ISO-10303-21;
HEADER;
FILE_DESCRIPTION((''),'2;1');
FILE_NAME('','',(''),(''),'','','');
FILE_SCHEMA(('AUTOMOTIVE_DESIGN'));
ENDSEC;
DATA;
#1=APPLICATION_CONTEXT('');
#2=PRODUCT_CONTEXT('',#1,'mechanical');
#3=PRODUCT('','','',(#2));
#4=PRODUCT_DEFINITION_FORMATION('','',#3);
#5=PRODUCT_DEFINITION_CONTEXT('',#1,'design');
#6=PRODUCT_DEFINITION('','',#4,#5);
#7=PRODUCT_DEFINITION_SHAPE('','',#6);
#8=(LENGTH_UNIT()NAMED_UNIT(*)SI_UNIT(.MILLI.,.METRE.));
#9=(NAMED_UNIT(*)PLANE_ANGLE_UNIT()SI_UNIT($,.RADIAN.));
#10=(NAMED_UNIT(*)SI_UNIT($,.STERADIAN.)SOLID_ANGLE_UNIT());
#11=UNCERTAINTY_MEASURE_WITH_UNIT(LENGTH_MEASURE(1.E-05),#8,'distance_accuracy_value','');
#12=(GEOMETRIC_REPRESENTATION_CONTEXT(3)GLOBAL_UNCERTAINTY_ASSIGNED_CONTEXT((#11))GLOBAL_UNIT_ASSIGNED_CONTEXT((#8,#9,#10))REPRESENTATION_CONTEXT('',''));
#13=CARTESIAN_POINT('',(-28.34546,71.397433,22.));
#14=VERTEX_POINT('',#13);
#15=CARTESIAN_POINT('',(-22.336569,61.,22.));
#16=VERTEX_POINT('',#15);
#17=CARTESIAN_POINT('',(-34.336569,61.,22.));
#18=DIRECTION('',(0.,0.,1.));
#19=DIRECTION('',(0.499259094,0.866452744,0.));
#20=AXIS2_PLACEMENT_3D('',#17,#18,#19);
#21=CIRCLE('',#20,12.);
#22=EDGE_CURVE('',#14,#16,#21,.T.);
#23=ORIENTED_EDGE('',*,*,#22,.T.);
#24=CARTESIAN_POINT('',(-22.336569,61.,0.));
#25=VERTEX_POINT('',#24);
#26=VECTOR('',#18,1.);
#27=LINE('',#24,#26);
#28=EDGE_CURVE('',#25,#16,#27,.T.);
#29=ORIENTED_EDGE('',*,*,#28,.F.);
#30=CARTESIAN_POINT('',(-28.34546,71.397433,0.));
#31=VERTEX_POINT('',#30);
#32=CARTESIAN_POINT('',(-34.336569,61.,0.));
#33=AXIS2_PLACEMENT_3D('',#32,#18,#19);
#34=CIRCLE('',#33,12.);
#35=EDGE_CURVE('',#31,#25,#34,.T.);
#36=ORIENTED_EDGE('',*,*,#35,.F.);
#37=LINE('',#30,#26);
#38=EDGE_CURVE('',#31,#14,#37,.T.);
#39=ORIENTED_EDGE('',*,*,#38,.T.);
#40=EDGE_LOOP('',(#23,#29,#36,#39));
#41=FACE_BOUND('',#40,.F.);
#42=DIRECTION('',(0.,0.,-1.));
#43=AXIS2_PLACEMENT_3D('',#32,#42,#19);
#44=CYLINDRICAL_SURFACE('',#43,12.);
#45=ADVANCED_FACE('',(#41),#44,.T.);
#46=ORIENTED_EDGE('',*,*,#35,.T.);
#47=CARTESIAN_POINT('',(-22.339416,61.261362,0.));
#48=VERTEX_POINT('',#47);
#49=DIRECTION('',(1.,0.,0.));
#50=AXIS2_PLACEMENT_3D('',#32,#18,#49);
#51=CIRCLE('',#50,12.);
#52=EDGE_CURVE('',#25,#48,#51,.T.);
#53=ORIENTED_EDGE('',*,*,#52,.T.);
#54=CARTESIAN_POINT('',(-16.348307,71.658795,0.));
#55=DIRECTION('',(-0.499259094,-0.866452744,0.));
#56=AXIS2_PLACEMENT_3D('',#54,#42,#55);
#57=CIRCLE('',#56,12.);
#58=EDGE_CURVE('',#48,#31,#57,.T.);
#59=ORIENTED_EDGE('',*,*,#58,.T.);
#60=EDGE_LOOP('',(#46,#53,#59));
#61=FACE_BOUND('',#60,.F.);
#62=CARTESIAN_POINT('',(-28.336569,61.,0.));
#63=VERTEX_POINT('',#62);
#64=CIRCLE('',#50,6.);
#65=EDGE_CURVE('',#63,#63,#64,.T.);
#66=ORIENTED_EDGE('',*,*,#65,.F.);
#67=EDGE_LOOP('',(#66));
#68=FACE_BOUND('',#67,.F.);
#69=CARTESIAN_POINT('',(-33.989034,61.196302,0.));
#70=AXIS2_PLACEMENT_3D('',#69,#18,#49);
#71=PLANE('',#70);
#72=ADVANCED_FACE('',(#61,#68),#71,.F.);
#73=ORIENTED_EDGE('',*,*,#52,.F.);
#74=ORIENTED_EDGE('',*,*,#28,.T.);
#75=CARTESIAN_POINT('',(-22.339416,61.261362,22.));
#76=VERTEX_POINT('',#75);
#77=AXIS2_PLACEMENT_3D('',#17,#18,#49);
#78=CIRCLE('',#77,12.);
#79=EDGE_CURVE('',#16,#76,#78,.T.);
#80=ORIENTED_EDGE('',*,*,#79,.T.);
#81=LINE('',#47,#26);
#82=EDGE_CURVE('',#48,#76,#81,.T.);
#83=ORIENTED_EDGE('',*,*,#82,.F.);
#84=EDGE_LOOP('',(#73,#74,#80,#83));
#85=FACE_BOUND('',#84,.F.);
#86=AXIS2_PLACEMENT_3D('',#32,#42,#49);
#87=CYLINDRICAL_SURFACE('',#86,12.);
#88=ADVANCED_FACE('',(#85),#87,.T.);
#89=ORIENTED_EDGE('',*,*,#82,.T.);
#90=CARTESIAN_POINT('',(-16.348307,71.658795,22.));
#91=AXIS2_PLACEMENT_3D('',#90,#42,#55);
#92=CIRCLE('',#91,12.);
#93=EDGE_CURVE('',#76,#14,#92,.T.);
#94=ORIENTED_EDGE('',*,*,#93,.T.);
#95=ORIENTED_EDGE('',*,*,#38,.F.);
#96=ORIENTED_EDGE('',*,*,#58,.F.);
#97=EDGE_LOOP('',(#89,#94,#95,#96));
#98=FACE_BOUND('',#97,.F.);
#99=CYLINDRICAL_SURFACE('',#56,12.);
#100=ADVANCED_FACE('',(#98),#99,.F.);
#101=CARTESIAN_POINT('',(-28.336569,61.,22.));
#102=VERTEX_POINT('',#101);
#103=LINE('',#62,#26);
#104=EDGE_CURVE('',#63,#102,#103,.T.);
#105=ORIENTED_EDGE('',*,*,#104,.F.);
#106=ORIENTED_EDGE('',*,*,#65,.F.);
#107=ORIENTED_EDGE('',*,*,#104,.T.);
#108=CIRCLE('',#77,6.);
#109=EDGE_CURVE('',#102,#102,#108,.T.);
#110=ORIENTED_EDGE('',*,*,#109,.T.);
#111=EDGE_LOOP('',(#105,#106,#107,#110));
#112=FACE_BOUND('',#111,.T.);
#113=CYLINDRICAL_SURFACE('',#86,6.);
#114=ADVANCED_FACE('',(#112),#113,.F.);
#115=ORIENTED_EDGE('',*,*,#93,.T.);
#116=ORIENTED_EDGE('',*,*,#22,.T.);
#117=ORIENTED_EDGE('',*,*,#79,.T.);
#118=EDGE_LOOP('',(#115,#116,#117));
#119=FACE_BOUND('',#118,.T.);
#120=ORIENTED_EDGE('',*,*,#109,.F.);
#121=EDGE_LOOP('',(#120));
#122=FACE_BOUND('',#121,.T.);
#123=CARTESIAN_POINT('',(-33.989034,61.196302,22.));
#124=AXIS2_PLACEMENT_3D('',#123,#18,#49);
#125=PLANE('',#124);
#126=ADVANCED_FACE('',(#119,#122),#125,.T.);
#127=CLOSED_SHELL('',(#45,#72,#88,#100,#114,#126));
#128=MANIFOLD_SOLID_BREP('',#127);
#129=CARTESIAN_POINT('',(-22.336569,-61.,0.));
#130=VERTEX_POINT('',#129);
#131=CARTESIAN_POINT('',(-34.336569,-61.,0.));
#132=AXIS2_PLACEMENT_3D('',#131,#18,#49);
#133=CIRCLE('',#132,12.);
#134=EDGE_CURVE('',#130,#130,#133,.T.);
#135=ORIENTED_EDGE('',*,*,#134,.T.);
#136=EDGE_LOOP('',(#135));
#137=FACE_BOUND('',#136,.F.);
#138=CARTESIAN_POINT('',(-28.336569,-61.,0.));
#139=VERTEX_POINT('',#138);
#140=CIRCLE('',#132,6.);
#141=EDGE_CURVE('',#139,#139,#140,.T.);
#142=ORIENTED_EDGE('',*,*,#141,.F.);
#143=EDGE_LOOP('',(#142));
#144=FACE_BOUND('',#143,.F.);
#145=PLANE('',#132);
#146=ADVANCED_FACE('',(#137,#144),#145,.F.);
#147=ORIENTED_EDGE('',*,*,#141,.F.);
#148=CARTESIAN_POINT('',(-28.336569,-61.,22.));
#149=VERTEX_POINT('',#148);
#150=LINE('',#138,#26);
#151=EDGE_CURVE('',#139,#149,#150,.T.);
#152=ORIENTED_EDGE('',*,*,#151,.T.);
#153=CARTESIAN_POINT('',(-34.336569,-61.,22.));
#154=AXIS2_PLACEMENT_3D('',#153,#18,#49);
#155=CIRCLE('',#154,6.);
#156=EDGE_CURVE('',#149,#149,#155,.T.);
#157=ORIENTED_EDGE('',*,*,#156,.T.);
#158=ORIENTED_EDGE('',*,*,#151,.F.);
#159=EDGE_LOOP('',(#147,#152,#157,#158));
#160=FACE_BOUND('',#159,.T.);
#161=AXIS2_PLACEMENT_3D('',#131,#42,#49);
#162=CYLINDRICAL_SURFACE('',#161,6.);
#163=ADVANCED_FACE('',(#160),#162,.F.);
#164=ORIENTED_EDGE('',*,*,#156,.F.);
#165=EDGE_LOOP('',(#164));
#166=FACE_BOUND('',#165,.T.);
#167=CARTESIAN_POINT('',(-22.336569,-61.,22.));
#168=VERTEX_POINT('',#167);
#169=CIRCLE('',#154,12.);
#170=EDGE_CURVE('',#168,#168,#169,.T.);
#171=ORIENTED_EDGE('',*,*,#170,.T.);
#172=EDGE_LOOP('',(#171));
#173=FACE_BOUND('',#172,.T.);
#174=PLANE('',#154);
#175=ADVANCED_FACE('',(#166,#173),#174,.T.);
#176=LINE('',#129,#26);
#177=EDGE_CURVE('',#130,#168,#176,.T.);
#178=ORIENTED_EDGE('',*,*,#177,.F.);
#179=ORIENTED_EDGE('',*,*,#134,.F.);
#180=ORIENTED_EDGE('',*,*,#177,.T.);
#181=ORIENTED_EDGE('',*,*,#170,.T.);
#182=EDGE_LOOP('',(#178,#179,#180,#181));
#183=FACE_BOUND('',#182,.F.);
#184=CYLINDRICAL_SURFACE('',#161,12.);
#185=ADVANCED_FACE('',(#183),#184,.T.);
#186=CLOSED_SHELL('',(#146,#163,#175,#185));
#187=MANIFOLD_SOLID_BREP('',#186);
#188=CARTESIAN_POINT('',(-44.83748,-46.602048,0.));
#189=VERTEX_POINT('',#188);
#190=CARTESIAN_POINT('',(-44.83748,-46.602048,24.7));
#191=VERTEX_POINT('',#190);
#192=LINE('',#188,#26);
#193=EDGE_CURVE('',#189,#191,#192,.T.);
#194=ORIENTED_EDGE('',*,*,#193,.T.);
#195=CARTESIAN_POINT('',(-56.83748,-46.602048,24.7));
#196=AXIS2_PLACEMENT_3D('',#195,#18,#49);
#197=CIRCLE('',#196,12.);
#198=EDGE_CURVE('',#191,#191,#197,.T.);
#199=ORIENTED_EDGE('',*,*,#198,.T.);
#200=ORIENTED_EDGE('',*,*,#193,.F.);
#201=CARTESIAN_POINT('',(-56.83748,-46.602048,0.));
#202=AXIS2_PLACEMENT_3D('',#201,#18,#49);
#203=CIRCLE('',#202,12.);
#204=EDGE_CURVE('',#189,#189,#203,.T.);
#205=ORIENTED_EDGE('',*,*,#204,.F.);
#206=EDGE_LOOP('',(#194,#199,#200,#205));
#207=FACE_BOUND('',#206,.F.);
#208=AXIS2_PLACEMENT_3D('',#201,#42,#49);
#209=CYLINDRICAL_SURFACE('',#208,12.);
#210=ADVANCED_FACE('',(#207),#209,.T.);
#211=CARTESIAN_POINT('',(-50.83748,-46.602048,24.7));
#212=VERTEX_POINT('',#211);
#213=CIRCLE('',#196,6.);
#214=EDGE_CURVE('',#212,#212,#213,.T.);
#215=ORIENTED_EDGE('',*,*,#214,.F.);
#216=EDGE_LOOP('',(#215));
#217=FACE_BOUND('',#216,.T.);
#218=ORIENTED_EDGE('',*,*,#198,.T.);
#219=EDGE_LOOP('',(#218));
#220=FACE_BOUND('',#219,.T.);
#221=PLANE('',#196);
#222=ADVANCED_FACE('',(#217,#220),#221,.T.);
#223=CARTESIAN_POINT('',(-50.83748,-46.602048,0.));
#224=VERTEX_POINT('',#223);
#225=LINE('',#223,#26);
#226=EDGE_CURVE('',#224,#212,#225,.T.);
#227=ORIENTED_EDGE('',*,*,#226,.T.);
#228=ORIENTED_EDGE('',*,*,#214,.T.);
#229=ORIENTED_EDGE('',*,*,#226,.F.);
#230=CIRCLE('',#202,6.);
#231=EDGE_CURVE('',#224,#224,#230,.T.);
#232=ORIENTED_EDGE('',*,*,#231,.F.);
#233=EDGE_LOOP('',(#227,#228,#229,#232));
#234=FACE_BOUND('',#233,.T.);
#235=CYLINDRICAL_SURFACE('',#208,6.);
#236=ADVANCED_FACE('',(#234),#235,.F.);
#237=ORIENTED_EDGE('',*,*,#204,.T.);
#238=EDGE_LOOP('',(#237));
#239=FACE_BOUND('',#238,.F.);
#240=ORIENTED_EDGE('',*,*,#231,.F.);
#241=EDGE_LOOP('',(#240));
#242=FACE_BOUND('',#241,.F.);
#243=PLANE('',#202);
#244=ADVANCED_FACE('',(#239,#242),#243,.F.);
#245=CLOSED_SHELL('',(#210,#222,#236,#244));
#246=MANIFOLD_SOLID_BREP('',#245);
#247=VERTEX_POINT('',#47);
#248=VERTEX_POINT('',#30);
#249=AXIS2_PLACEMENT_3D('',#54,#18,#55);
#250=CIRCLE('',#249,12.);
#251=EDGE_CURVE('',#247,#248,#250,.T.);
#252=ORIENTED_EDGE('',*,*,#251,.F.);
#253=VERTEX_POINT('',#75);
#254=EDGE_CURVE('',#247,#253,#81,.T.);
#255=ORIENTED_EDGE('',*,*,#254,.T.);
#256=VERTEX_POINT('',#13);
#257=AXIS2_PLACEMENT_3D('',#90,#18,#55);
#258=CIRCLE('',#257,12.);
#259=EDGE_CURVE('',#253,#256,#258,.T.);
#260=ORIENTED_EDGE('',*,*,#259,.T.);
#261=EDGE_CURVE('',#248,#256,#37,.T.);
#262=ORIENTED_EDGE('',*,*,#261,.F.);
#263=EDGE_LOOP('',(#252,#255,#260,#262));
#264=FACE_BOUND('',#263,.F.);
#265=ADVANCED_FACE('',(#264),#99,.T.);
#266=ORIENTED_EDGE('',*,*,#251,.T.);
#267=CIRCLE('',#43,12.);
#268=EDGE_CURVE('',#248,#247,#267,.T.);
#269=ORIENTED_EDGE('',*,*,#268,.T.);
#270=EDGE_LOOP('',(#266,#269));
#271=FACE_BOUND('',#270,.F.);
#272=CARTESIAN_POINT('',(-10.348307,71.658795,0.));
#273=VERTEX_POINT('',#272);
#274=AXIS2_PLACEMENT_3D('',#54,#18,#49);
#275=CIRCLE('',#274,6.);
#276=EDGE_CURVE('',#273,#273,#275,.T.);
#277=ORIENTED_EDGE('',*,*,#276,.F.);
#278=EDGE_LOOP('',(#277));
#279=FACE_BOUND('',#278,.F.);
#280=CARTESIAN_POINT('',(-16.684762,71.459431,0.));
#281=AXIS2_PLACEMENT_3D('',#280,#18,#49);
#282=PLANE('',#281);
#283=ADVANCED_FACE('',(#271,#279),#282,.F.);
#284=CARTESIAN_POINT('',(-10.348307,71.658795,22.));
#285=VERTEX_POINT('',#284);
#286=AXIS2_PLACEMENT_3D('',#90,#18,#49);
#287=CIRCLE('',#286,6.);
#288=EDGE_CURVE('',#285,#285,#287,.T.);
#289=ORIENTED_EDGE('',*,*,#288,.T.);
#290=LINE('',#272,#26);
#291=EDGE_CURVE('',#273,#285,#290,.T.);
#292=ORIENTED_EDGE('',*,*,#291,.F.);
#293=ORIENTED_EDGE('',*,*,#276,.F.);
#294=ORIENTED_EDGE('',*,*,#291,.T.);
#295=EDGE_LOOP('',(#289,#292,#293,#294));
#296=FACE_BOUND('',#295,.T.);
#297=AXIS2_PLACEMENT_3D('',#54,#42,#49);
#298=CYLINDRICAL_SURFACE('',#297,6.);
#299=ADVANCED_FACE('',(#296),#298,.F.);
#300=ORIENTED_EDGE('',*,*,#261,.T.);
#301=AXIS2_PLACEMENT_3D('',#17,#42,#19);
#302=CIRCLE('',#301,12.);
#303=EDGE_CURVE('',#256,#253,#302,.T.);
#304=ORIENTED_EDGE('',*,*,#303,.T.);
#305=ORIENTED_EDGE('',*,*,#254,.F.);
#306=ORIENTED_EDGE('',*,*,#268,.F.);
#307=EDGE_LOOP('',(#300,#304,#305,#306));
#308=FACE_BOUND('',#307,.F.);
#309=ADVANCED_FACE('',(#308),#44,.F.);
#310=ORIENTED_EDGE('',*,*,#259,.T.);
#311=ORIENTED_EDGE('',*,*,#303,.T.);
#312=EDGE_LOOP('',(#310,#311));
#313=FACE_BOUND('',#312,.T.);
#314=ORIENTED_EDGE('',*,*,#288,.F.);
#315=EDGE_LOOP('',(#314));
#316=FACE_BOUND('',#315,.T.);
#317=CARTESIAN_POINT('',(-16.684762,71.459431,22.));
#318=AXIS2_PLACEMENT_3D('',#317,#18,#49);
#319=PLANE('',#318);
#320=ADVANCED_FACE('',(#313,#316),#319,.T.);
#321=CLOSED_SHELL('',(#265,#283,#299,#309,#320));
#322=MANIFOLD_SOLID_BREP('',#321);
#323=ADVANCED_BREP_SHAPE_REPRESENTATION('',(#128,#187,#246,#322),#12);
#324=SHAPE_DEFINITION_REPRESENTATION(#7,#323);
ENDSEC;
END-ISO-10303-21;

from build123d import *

# Parameters (mm, degrees)
F0_R     = 6
F1_DEPTH = 22
F0_R_2   = 12
F2_DEPTH = 24.7


# Not quite as in the source:
# - a feature names something its author has since deleted; it is built from what else it names


with BuildPart() as f1:
    # F0 (on Top) → F1 (new body)
    with BuildSketch(Plane.XY):
        with BuildLine():
            ThreePointArc((-22.3394160141, 61.2613618045), (-26.6720359479, 65.5415552979), (-28.3454602985, 71.3974329242))
            ThreePointArc((-28.3454602985, 71.3974329242), (-44.7263073816, 54.9955562097), (-22.3365694268, 61))
            ThreePointArc((-22.3365694268, 61), (-22.3372810947, 61.1306886528), (-22.3394160141, 61.2613618045))
        make_face()
        with Locations((-34.3365694268, 61)):
            Circle(F0_R, mode=Mode.SUBTRACT)
    extrude(amount=F1_DEPTH)


with BuildPart() as f1b:
    # F0 (on Top) → F1, piece 2 (new body)
    with BuildSketch(Plane.XY):
        with Locations((-34.3365694268, -61)):
            Circle(F0_R_2)
        with Locations((-34.3365694268, -61)):
            Circle(F0_R, mode=Mode.SUBTRACT)
    extrude(amount=F1_DEPTH)


with BuildPart() as f1c:
    # F0 (on Top) → F1, piece 3 (new body)
    with BuildSketch(Plane.XY):
        with BuildLine():
            ThreePointArc((-22.3394160141, 61.2613618045), (-10.3438630956, 61.2690567739), (-4.3483068859, 71.6587947287))
            ThreePointArc((-4.3483068859, 71.6587947287), (-16.4789955387, 83.6580830607), (-28.3454602985, 71.3974329242))
            ThreePointArc((-28.3454602985, 71.3974329242), (-24.0128403647, 67.1172394308), (-22.3394160141, 61.2613618045))
        make_face()
        with Locations((-16.3483068859, 71.6587947287)):
            Circle(F0_R, mode=Mode.SUBTRACT)
    extrude(amount=F1_DEPTH)


with BuildPart() as f2:
    # F0 (on Top) → F2 (new body)
    with BuildSketch(Plane.XY):
        with Locations((-56.8374801716, -46.6020476776)):
            Circle(F0_R_2)
        with Locations((-56.8374801716, -46.6020476776)):
            Circle(F0_R, mode=Mode.SUBTRACT)
    extrude(amount=F2_DEPTH)


solid = Compound([f1.part, f1b.part, f1c.part, f2.part])
